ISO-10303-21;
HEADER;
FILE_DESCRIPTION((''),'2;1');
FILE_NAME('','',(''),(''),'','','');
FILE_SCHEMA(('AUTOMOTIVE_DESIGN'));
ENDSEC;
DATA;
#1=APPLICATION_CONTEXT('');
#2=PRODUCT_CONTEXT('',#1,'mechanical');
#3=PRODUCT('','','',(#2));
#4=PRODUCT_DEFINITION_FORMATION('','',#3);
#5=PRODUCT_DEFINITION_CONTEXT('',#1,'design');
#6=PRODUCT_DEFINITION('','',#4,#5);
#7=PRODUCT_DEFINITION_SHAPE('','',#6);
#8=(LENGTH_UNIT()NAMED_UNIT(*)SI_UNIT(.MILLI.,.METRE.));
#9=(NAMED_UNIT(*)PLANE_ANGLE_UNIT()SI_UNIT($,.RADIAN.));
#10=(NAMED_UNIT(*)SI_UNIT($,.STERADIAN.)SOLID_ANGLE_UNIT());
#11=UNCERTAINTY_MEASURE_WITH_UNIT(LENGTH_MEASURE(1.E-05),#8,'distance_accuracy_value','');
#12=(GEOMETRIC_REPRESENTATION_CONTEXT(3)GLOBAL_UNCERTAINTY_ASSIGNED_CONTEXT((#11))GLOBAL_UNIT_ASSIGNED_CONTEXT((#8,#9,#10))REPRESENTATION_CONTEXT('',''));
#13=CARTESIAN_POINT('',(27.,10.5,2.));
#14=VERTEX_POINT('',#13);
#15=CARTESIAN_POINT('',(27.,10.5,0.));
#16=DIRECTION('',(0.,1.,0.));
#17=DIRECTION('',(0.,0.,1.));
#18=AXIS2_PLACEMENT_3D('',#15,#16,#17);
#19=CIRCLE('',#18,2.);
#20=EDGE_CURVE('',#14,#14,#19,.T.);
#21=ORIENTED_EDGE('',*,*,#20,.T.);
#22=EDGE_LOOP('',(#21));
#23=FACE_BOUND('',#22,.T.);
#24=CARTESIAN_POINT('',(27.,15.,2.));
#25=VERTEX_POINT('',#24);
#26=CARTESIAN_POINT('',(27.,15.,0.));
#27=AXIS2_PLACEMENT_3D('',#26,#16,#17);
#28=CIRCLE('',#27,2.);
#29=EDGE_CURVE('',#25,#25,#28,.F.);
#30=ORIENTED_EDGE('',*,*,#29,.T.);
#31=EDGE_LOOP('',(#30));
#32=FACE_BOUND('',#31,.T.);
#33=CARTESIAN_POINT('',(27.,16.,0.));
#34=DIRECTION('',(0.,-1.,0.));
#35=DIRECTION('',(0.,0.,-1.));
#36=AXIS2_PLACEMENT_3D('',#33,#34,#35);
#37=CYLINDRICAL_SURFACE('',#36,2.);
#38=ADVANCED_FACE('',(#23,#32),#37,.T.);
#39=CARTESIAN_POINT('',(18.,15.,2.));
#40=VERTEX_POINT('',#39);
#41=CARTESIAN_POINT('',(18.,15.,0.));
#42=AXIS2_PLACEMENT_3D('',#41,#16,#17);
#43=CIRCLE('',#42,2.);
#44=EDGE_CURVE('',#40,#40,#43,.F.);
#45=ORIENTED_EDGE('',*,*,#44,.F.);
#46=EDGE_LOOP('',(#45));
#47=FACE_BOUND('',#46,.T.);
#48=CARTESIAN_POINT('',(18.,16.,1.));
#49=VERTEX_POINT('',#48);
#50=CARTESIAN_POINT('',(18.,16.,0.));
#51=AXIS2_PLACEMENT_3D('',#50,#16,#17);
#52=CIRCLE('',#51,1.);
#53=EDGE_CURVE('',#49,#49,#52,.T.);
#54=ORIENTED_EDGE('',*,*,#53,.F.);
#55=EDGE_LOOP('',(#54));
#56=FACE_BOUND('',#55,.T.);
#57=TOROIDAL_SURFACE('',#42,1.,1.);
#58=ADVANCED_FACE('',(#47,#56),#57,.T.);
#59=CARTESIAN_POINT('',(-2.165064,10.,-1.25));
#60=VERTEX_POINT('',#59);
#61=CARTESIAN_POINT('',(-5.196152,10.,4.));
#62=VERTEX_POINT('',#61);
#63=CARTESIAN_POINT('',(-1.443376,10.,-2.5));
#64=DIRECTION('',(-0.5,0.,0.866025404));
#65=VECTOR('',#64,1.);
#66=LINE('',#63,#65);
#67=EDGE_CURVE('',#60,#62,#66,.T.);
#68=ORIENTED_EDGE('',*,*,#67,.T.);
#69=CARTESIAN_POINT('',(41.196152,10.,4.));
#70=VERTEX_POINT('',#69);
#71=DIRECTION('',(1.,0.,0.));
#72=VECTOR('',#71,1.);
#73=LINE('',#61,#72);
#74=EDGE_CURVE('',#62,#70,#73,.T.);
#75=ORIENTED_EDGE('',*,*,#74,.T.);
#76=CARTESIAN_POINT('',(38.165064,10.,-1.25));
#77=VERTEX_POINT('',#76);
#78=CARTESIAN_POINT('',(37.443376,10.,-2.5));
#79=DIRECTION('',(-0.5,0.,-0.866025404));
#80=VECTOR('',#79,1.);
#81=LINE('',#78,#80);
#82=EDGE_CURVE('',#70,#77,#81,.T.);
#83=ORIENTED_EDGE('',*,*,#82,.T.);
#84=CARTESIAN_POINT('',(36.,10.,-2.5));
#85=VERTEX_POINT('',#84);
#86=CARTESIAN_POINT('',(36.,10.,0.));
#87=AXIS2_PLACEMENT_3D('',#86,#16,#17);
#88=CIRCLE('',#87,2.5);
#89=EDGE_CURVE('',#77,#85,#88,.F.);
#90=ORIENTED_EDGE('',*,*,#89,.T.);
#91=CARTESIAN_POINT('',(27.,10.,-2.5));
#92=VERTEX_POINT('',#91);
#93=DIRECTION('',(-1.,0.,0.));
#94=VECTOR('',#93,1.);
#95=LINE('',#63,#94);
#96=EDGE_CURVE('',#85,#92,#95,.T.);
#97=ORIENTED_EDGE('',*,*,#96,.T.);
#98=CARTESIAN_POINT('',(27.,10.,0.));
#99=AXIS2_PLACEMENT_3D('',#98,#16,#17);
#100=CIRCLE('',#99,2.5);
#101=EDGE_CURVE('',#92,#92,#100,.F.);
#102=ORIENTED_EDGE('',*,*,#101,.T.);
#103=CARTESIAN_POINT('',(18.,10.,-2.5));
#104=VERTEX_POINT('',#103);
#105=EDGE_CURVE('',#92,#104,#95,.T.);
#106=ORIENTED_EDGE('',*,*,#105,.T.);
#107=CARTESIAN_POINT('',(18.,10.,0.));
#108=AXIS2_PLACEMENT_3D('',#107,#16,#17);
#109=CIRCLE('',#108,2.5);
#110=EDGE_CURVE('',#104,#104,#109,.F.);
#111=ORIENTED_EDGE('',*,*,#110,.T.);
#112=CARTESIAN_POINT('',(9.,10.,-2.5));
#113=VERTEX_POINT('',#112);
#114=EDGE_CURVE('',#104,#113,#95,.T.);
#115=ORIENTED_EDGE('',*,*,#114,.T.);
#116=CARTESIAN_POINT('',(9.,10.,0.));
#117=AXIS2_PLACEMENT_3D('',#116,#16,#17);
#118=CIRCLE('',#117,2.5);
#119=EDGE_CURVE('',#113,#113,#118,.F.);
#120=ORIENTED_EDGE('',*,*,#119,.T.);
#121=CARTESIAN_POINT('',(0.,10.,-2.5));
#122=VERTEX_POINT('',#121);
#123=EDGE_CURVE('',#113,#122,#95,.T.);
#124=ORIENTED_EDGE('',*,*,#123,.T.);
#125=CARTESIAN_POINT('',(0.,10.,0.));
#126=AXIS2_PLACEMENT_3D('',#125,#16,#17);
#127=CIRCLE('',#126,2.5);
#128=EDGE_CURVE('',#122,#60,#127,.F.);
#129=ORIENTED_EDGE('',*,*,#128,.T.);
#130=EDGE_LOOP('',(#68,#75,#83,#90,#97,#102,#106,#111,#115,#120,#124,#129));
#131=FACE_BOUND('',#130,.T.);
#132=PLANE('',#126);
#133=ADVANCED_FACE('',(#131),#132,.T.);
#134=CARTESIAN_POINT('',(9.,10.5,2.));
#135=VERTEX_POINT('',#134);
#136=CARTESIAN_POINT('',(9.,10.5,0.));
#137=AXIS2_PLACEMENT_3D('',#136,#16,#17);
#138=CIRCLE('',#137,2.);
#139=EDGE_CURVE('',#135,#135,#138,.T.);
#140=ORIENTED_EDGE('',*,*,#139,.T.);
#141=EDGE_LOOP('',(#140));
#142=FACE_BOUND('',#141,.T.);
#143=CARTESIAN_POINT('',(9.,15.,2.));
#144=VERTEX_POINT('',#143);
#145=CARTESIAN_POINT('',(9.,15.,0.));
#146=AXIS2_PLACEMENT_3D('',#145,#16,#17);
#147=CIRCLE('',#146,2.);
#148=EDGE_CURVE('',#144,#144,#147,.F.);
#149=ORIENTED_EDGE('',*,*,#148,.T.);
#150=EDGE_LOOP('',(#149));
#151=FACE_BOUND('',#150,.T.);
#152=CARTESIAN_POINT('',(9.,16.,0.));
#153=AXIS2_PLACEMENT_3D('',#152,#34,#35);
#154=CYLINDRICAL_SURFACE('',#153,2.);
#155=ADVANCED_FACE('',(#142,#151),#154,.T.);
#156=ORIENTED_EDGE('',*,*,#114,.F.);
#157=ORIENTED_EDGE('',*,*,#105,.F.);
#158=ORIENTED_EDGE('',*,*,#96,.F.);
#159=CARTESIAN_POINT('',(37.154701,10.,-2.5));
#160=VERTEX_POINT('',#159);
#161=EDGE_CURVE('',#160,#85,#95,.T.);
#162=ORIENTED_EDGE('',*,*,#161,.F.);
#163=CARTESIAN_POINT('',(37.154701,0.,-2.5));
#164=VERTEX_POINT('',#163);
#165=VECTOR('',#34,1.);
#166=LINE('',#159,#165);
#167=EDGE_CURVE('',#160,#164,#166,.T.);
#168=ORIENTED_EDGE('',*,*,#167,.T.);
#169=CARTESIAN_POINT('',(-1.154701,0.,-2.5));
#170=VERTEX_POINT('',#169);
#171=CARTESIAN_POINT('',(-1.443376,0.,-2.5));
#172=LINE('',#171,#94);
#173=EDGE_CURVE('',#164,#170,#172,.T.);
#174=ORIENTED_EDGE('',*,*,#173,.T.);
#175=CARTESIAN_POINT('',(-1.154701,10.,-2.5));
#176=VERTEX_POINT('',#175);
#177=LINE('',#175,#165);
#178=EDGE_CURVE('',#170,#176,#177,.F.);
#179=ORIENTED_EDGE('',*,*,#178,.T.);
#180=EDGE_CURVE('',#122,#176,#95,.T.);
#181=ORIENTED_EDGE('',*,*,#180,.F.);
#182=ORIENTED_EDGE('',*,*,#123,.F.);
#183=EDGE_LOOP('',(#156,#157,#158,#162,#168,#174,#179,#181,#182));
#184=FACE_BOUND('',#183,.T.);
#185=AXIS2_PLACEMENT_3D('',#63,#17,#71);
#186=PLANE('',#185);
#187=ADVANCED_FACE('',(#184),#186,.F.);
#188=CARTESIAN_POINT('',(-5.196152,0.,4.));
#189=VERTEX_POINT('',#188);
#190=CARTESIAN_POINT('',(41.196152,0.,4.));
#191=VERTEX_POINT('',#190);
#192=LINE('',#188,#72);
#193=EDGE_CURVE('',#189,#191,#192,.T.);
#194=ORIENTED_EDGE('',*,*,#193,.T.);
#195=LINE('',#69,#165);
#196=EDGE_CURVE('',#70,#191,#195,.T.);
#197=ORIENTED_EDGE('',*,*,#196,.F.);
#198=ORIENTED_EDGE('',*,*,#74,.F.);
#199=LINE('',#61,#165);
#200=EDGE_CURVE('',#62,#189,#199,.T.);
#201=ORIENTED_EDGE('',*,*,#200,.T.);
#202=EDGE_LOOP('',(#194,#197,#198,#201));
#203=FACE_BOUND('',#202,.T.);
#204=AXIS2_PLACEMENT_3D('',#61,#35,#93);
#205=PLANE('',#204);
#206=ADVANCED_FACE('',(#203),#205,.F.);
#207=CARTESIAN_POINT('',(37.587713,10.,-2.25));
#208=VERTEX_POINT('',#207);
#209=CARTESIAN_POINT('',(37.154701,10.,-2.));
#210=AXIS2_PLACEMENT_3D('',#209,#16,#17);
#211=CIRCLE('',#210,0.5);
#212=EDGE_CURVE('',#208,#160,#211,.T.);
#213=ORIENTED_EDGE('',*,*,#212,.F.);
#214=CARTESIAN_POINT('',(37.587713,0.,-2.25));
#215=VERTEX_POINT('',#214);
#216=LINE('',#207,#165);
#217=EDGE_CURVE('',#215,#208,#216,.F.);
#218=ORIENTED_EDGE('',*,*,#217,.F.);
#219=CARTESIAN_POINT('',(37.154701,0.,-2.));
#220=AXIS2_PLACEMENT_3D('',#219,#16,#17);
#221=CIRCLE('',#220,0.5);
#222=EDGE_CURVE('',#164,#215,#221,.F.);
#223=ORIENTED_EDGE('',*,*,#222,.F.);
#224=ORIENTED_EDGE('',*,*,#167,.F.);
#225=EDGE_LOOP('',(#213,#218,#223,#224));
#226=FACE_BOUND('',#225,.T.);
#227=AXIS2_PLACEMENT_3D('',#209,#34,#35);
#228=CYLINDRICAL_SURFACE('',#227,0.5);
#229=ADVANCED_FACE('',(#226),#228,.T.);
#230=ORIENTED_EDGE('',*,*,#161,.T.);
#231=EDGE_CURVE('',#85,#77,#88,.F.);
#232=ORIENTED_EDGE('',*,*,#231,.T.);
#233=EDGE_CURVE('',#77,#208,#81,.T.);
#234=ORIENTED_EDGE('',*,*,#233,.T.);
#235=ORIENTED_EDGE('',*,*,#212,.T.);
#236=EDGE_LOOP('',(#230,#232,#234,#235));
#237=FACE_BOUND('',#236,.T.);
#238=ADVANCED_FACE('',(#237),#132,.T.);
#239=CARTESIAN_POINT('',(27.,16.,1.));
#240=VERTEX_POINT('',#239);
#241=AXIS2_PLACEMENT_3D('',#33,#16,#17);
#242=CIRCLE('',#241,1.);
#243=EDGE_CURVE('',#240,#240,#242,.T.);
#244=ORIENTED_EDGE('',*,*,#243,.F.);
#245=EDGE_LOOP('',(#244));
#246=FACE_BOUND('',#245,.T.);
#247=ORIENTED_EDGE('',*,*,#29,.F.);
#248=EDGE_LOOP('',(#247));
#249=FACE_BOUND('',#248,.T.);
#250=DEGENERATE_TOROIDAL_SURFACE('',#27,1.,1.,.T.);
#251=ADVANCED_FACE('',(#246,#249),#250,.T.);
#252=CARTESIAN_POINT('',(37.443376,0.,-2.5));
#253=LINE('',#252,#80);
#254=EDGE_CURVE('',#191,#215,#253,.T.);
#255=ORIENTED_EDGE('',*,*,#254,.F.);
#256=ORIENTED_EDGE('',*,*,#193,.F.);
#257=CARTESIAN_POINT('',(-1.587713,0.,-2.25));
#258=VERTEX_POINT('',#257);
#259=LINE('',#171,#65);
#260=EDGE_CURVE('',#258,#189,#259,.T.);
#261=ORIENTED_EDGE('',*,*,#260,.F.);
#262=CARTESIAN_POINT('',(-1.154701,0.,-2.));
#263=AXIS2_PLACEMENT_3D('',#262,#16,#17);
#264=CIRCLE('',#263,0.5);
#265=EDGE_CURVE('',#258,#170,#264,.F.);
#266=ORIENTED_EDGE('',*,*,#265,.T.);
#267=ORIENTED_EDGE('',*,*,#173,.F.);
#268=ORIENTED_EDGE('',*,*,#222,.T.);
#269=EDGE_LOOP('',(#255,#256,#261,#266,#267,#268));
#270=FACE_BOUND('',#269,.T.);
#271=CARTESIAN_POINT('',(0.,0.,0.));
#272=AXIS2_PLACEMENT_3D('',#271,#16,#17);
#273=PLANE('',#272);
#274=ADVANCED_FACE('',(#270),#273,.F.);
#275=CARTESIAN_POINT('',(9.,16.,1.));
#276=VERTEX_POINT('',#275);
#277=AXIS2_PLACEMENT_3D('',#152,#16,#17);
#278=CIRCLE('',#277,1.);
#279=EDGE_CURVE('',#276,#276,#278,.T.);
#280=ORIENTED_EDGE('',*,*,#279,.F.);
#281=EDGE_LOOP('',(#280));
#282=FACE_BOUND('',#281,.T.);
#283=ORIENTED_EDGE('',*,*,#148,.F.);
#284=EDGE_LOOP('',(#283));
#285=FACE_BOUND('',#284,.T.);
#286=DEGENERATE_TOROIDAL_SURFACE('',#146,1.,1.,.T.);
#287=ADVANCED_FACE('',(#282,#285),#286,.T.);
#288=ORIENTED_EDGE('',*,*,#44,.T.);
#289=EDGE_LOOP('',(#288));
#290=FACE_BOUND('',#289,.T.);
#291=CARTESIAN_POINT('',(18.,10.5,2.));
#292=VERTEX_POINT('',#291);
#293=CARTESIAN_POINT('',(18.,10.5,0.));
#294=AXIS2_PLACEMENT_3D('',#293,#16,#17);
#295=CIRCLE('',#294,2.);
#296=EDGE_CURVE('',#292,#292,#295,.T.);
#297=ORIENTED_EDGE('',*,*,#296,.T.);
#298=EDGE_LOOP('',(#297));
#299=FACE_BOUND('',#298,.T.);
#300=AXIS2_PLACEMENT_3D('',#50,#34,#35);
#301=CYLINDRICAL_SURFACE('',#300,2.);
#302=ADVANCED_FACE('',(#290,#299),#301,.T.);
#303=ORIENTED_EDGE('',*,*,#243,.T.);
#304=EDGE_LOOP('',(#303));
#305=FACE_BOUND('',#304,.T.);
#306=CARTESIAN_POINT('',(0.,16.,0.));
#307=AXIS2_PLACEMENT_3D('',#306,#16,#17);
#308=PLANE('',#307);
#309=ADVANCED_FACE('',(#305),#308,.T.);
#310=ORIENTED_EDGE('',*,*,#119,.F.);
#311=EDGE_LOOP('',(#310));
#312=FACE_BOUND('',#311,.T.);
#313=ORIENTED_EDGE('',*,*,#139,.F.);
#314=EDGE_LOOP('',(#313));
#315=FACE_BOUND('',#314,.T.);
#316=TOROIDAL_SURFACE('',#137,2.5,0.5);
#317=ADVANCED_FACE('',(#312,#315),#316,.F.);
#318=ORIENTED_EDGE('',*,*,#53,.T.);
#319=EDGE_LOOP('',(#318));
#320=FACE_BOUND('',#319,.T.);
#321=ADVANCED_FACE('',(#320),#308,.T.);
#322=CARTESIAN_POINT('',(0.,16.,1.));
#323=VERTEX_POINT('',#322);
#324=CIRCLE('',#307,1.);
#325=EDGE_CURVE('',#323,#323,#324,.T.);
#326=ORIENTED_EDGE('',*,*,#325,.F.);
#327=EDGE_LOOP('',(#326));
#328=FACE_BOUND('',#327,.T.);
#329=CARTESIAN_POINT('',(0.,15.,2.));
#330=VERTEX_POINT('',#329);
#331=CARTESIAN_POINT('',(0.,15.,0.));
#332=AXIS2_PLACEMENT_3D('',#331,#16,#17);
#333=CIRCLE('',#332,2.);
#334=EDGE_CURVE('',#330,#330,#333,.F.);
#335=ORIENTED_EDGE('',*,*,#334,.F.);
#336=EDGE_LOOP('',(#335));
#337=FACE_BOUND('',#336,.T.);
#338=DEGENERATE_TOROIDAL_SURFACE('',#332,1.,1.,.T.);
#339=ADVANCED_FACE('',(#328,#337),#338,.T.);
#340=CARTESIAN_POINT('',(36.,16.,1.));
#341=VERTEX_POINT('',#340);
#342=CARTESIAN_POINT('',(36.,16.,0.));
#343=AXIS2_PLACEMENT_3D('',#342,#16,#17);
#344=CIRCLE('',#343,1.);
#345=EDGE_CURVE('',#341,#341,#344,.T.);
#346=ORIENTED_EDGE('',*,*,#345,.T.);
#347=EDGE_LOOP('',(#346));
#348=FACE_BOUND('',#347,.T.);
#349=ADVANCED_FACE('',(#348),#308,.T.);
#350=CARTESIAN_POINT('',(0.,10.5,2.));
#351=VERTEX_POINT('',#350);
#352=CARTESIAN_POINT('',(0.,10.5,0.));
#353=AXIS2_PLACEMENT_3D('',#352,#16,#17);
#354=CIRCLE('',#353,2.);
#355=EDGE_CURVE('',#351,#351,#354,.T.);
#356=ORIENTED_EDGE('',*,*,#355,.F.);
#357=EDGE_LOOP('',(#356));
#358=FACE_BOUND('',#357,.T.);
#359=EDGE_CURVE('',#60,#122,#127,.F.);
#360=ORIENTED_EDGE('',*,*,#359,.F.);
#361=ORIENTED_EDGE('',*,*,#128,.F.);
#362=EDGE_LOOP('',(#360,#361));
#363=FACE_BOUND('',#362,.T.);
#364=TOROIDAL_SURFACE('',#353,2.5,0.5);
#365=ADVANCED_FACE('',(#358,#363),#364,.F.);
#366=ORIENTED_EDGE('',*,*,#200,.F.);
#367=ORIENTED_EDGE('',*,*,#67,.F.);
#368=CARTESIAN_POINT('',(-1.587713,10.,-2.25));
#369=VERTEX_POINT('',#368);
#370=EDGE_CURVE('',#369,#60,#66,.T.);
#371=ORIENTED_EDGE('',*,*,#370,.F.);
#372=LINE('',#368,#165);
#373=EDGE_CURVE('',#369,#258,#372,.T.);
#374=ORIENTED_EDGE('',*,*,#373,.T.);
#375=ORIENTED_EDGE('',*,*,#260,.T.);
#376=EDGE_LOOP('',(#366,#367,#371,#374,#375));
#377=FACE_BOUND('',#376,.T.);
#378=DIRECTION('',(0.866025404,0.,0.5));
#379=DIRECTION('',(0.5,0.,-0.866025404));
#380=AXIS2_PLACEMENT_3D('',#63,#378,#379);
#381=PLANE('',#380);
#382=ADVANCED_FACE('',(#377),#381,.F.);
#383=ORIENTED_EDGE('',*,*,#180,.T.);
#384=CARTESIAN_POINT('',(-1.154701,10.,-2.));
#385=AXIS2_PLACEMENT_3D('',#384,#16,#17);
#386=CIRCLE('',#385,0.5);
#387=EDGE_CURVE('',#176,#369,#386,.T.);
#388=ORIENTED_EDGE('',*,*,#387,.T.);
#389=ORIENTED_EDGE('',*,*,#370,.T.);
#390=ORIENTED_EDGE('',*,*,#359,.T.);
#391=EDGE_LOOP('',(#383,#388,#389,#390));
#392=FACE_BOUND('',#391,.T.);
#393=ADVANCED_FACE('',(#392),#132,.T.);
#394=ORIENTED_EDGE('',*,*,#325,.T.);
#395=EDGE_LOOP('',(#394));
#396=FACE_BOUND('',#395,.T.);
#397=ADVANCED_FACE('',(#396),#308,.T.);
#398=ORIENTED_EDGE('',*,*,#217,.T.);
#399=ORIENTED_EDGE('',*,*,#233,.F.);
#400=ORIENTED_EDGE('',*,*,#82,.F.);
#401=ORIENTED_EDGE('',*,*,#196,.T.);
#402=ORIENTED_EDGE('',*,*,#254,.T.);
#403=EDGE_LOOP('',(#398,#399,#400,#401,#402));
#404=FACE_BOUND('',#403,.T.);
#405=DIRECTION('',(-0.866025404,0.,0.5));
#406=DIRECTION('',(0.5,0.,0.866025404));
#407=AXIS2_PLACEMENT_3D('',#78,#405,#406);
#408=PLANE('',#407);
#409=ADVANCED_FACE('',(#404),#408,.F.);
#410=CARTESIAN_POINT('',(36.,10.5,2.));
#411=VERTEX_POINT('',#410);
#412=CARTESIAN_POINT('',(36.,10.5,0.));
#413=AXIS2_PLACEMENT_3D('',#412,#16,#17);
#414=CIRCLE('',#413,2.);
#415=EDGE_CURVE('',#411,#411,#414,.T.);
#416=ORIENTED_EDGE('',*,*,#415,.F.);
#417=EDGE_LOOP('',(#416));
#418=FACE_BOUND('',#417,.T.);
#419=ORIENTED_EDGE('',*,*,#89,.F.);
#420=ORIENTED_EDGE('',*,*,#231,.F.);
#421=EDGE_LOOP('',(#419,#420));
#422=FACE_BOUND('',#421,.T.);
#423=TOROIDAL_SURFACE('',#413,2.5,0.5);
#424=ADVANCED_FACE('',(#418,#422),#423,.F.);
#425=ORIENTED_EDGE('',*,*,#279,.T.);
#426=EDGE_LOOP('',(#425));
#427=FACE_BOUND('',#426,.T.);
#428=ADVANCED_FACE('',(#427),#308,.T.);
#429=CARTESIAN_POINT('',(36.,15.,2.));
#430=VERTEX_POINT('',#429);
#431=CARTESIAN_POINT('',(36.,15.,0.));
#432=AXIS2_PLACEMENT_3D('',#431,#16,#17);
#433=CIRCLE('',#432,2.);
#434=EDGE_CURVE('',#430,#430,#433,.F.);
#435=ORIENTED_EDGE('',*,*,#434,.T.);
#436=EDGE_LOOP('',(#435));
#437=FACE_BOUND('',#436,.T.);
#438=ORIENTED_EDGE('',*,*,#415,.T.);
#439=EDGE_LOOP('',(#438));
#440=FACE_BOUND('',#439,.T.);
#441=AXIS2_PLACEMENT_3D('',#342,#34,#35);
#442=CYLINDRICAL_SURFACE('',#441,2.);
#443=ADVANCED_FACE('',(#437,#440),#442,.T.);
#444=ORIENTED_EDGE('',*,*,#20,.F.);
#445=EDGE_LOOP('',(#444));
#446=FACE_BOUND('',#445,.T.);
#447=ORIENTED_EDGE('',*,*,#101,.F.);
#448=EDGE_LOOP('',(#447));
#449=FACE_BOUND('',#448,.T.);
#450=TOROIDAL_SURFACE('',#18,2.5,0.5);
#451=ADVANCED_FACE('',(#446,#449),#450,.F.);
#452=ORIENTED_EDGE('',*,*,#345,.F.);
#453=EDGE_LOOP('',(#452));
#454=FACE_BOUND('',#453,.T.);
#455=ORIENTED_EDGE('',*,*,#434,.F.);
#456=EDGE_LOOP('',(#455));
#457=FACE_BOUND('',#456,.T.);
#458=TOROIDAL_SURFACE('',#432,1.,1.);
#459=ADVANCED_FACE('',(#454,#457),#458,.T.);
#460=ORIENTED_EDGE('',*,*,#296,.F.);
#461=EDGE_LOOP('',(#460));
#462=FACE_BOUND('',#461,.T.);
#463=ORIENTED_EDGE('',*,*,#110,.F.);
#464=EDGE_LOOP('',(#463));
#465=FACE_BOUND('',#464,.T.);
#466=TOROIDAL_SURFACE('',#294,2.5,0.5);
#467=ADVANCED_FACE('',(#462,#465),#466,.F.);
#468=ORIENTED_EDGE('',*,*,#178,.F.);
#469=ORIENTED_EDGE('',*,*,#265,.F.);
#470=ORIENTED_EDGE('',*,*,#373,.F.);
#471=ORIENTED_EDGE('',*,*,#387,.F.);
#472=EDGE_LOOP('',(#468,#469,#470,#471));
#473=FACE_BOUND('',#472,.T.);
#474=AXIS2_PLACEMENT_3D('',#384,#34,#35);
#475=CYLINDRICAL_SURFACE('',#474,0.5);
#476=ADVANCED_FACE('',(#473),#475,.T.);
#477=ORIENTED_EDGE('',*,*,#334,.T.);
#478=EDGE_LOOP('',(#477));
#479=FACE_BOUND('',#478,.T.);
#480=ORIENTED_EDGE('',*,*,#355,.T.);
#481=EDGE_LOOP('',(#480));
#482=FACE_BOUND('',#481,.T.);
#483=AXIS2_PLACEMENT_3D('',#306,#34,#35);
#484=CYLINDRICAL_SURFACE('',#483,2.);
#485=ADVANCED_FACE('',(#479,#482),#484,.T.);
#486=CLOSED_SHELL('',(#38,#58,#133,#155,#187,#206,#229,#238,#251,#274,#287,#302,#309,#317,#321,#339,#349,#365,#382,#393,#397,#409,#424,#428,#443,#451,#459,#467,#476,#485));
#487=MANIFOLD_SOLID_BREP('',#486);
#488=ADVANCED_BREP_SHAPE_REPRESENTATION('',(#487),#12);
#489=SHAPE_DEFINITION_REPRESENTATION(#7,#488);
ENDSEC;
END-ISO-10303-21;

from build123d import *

# Parameters (mm, degrees)
SKETCH1_R           = 2
BOSS_EXTRUDE1_DEPTH = 10
SKETCH1_2_R         = 2
BOSS_EXTRUDE2_DEPTH = 16
FILLET1_R           = 1
FILLET2_R           = 0.5


with BuildPart() as part:
    # Sketch1 → Boss-Extrude1 (new body)
    with BuildSketch(Plane(origin=(0, 0, 0), x_dir=(1, 0, 0), z_dir=(0, 1, 0))):
        Polygon((-1.443375673, 2.5), (37.443375673, 2.5), (41.196152423, -4), (-5.196152423, -4), align=None)
        with Locations(Location((0, 0, 0), (0, 0, 270))):
            Circle(SKETCH1_R, mode=Mode.SUBTRACT)
        with Locations(Location((9, 0, 0), (0, 0, 270))):
            Circle(SKETCH1_R, mode=Mode.SUBTRACT)
        with Locations(Location((18, 0, 0), (0, 0, 270))):
            Circle(SKETCH1_R, mode=Mode.SUBTRACT)
        with Locations(Location((27, 0, 0), (0, 0, 270))):
            Circle(SKETCH1_R, mode=Mode.SUBTRACT)
        with Locations(Location((36, 0, 0), (0, 0, 270))):
            Circle(SKETCH1_R, mode=Mode.SUBTRACT)
    extrude(amount=BOSS_EXTRUDE1_DEPTH)

    # Sketch1<2> → Boss-Extrude2 (add)
    with BuildSketch(Plane(origin=(0, 0, 0), x_dir=(1, 0, 0), z_dir=(0, 1, 0))):
        with Locations(Location((0, 0, 0), (0, 0, 270))):
            Circle(SKETCH1_2_R)
        with Locations(Location((9, 0, 0), (0, 0, 270))):
            Circle(SKETCH1_2_R)
        with Locations(Location((18, 0, 0), (0, 0, 270))):
            Circle(SKETCH1_2_R)
        with Locations(Location((27, 0, 0), (0, 0, 270))):
            Circle(SKETCH1_2_R)
        with Locations(Location((36, 0, 0), (0, 0, 270))):
            Circle(SKETCH1_2_R)
    extrude(amount=BOSS_EXTRUDE2_DEPTH)

    # Fillet1
    fillet1_edges = [part.edges().sort_by_distance(p)[0] for p in [
        (0, 16, -2),
        (9, 16, -2),
        (18, 16, -2),
        (27, 16, -2),
        (36, 16, -2),
    ]]
    fillet(fillet1_edges, radius=FILLET1_R)

    # Fillet2
    fillet2_edges = [part.edges().sort_by_distance(p)[0] for p in [
        (0, 10, -2),
        (9, 10, -2),
        (18, 10, -2),
        (27, 10, -2),
        (36, 10, -2),
        (-1.443375673, 5, -2.5),
        (37.443375673, 5, -2.5),
    ]]
    fillet(fillet2_edges, radius=FILLET2_R - 0.0001)  # a hair under: the kernel refuses the full size


solid = part.part
